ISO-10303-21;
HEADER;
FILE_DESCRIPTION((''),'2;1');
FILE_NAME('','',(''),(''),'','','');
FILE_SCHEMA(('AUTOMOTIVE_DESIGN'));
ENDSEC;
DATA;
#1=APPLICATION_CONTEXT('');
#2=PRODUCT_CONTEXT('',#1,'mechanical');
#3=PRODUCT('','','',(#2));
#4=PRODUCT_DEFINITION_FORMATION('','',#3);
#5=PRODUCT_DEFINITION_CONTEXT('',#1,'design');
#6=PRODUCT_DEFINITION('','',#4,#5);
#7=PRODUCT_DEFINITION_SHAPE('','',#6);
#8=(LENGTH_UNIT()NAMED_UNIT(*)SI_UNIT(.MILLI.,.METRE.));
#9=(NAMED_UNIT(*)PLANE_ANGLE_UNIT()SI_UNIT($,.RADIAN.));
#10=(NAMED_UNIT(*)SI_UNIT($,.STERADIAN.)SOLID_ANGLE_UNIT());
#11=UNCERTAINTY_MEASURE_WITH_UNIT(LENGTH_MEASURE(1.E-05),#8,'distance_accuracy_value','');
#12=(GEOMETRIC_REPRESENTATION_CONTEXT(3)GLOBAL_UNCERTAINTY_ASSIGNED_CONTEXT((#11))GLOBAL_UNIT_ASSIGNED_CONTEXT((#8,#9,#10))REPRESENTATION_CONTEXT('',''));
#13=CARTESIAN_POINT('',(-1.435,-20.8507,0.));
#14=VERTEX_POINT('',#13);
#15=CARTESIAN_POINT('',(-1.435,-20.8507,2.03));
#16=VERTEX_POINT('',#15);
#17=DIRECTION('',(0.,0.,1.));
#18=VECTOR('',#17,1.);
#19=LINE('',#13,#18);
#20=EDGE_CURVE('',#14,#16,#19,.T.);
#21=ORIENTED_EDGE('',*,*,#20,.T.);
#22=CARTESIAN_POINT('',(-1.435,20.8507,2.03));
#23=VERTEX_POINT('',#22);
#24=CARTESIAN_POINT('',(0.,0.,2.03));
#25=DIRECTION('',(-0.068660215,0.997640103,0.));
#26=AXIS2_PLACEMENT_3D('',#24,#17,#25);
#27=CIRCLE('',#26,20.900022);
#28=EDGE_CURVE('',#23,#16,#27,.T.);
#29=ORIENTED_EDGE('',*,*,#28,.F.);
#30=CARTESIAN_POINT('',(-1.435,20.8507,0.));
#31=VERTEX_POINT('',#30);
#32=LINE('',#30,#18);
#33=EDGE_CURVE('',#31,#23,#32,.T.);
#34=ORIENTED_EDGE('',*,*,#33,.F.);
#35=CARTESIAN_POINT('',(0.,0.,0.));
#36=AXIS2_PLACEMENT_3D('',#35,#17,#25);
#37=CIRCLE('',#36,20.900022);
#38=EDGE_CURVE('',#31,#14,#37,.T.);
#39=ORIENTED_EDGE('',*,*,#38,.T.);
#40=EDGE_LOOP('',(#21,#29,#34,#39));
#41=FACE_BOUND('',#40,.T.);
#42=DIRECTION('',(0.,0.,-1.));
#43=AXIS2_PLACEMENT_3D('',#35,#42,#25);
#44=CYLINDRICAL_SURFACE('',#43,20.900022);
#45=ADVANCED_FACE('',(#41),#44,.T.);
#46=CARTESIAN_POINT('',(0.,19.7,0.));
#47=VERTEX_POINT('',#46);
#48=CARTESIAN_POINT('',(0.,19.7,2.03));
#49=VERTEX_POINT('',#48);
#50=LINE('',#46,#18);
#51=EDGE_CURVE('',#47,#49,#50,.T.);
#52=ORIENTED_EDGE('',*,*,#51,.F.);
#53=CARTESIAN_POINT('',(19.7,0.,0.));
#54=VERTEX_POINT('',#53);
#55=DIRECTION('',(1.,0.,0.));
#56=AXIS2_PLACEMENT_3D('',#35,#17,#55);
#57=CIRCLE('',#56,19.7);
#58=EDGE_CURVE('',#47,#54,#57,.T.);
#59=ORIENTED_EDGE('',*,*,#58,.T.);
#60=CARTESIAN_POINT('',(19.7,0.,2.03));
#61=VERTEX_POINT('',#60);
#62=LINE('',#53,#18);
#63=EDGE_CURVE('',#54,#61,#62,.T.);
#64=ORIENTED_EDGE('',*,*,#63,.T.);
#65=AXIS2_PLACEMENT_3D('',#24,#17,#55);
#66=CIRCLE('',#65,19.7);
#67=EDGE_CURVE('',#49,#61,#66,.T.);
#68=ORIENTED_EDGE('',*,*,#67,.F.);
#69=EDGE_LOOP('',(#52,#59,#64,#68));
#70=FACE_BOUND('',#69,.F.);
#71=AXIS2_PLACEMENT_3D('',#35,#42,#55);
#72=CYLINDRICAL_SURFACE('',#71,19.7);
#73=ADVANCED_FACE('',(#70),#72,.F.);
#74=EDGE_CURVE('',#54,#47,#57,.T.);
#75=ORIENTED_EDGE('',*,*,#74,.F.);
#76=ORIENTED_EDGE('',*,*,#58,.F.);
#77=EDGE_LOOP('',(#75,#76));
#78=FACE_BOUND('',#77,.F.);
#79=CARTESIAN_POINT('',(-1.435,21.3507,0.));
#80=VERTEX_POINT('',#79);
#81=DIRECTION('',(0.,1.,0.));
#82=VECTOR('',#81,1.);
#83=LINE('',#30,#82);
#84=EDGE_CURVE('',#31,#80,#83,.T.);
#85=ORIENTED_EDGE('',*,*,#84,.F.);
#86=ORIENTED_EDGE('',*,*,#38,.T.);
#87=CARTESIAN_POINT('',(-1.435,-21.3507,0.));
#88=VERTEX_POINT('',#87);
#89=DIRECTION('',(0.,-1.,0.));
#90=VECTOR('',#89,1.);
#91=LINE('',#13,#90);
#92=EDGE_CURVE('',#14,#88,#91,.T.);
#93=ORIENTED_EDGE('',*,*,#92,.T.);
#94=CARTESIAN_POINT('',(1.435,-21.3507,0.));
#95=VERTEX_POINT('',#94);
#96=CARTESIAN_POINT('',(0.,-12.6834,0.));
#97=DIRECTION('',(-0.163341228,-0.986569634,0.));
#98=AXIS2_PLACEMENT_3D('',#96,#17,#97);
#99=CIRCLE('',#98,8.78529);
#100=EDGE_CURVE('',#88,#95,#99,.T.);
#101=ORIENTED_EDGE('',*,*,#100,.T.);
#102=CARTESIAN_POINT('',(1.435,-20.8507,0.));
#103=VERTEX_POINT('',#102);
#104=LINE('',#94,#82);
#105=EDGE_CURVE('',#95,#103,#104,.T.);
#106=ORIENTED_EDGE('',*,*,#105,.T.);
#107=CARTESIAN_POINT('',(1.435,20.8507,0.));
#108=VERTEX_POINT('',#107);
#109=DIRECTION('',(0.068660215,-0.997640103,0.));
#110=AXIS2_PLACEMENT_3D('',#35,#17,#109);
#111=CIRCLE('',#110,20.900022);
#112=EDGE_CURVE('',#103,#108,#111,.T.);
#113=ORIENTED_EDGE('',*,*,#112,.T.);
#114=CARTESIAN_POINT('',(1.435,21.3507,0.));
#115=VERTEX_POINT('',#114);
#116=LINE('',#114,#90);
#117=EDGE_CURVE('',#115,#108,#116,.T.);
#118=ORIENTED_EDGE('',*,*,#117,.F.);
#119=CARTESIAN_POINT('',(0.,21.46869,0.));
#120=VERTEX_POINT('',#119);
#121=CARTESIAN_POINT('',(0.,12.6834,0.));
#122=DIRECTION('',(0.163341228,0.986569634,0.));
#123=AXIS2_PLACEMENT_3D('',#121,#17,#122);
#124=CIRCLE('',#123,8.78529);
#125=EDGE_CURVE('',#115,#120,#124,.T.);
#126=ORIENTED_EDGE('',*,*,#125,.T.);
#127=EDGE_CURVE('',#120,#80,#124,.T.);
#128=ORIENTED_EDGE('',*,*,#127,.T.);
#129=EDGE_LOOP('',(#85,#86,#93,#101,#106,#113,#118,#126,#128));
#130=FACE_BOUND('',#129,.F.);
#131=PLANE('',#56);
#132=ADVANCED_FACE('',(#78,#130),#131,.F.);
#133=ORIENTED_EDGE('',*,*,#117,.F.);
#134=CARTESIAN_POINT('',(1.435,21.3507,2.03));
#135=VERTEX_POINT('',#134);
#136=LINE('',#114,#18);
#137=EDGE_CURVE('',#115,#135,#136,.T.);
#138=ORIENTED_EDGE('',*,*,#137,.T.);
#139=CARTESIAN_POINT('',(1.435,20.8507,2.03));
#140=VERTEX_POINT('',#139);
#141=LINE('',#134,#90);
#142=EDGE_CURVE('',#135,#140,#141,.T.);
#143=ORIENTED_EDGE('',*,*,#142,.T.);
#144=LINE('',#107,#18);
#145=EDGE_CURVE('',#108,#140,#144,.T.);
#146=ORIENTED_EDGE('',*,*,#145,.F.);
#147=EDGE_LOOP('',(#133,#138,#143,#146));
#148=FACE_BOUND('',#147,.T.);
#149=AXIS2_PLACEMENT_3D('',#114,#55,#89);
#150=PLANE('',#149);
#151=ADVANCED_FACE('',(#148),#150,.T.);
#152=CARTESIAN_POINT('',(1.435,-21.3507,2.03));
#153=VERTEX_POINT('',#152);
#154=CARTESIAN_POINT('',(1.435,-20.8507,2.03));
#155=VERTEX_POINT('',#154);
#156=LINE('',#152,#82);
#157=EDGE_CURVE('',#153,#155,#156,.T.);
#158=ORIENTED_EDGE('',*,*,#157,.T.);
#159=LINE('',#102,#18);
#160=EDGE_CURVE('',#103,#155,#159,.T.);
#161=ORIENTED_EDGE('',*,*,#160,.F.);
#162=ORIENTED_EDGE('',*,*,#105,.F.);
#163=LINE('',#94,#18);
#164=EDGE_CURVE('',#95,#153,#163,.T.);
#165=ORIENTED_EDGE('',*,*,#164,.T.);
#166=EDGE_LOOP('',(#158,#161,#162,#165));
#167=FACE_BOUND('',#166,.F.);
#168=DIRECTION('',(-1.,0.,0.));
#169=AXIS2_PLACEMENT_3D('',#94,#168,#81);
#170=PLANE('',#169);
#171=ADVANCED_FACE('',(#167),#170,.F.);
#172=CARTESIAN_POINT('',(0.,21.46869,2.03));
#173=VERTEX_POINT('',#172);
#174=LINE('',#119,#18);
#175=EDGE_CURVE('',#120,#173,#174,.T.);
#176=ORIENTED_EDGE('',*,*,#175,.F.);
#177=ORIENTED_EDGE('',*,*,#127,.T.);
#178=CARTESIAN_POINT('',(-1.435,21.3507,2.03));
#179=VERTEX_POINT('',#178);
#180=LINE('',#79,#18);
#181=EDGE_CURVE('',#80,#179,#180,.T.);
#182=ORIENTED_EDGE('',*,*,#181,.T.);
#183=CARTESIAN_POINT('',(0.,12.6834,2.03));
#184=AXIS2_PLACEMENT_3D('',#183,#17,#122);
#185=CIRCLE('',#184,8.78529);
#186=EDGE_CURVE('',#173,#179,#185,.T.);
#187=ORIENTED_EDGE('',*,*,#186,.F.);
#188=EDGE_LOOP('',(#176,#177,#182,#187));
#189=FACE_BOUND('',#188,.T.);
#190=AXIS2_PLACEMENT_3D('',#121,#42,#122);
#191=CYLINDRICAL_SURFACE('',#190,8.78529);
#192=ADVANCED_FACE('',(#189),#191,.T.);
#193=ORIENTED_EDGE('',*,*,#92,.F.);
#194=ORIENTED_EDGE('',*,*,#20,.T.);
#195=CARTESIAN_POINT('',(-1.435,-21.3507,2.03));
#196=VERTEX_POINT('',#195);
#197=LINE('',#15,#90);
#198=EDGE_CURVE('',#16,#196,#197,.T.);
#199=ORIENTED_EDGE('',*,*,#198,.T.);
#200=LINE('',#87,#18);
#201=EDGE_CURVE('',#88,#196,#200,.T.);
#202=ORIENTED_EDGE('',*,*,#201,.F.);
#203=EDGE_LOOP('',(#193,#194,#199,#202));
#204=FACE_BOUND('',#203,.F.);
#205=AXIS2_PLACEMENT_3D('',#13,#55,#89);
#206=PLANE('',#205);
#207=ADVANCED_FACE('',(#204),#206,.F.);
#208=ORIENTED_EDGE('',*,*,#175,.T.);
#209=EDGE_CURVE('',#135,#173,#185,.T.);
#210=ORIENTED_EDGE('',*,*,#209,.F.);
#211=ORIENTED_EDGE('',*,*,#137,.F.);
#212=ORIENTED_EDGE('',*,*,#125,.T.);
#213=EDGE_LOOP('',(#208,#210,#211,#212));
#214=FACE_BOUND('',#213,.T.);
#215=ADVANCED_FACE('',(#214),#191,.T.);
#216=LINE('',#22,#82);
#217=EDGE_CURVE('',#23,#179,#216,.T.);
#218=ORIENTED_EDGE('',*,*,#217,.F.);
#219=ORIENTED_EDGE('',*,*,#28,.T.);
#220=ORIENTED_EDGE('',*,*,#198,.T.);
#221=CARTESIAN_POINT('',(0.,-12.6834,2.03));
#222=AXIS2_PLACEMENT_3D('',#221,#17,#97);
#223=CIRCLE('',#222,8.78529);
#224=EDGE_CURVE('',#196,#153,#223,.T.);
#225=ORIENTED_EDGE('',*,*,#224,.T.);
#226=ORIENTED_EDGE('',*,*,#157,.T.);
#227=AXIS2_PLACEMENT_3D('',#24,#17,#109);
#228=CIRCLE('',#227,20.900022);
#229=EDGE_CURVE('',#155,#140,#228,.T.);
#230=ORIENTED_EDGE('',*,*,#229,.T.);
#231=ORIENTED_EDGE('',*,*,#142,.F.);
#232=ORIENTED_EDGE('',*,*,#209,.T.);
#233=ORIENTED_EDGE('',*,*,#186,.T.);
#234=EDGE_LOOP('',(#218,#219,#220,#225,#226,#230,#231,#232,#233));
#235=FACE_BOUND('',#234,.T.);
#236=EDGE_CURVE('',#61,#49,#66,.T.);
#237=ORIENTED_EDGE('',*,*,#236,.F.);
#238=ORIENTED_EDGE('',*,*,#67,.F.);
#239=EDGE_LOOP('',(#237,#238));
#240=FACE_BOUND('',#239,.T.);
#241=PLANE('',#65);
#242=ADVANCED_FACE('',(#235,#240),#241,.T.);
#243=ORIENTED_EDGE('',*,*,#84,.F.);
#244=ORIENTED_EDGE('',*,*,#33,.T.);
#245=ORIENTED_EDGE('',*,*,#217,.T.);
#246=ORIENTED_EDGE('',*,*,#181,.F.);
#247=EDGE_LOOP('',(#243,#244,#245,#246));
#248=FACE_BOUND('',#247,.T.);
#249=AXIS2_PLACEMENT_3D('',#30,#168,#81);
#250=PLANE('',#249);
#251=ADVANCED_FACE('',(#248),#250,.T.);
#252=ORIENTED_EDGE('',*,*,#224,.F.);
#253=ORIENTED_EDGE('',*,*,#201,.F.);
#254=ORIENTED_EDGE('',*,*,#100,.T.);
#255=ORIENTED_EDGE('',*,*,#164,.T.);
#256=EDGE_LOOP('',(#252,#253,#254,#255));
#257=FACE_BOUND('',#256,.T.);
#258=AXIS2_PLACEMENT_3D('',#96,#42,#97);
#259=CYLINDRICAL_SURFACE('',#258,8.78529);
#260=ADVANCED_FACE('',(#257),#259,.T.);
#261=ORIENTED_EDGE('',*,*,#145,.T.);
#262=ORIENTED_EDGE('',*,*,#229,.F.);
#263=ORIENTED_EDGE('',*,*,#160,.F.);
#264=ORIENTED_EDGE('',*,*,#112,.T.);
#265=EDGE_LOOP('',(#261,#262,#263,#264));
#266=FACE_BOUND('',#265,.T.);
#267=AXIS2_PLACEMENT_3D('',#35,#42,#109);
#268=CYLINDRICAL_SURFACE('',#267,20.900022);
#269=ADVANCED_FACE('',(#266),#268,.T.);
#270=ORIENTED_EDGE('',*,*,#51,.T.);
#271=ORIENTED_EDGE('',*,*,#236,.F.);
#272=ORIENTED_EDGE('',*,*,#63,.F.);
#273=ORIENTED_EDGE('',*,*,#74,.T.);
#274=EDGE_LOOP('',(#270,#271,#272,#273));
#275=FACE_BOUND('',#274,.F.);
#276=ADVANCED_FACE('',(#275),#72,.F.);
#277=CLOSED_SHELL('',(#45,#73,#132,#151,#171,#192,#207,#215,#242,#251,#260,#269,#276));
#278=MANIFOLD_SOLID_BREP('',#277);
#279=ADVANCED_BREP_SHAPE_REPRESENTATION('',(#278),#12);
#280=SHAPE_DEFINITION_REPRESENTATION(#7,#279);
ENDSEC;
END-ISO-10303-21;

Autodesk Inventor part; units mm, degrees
ref_plane "YZ Plane" through (0, 0, 0) normal (1, 0, 0) x (0, 1, 0)
ref_plane "XZ Plane" through (0, 0, 0) normal (0, 1, 0) x (-1, 0, 0)
ref_plane "XY Plane" through (0, 0, 0) normal (0, 0, 1) x (1, 0, 0)
sketch "Sketch1" plane through (0, 0, 0) normal (0, 0, 1) x (1, 0, 0)
  circle A0 centre (0, 0) radius 19.7
  line L0 (-1.435, 20.8507) -> (-1.435, 21.3507)
  line L1 (1.435, 21.3507) -> (1.435, 20.8507)
  arc A1 (1.435, 21.3507) -> (-1.435, 21.3507) centre (0, 12.6834) ccw
  line L2 (-5.669, 0) -> (4.2057, 0)
  line L3 (0, 24.0978) -> (0, 18.8809)
  line L4 (-1.435, -20.8507) -> (-1.435, -21.3507)
  line L5 (1.435, -21.3507) -> (1.435, -20.8507)
  arc A2 (-1.435, -21.3507) -> (1.435, -21.3507) centre (0, -12.6834) ccw
  arc A3 (-1.435, 20.8507) -> (-1.435, -20.8507) centre (0, 0) ccw
  arc A4 (1.435, -20.8507) -> (1.435, 20.8507) centre (0, 0) ccw
  dimension "d2" = 0.5
  dimension "d3" = 0.5
  dimension "d4" = 2.87
extrude "Extrusion1" add sketch "Sketch1" along normal blind 2.03
properties part number "venti-valve-lock-ring"
